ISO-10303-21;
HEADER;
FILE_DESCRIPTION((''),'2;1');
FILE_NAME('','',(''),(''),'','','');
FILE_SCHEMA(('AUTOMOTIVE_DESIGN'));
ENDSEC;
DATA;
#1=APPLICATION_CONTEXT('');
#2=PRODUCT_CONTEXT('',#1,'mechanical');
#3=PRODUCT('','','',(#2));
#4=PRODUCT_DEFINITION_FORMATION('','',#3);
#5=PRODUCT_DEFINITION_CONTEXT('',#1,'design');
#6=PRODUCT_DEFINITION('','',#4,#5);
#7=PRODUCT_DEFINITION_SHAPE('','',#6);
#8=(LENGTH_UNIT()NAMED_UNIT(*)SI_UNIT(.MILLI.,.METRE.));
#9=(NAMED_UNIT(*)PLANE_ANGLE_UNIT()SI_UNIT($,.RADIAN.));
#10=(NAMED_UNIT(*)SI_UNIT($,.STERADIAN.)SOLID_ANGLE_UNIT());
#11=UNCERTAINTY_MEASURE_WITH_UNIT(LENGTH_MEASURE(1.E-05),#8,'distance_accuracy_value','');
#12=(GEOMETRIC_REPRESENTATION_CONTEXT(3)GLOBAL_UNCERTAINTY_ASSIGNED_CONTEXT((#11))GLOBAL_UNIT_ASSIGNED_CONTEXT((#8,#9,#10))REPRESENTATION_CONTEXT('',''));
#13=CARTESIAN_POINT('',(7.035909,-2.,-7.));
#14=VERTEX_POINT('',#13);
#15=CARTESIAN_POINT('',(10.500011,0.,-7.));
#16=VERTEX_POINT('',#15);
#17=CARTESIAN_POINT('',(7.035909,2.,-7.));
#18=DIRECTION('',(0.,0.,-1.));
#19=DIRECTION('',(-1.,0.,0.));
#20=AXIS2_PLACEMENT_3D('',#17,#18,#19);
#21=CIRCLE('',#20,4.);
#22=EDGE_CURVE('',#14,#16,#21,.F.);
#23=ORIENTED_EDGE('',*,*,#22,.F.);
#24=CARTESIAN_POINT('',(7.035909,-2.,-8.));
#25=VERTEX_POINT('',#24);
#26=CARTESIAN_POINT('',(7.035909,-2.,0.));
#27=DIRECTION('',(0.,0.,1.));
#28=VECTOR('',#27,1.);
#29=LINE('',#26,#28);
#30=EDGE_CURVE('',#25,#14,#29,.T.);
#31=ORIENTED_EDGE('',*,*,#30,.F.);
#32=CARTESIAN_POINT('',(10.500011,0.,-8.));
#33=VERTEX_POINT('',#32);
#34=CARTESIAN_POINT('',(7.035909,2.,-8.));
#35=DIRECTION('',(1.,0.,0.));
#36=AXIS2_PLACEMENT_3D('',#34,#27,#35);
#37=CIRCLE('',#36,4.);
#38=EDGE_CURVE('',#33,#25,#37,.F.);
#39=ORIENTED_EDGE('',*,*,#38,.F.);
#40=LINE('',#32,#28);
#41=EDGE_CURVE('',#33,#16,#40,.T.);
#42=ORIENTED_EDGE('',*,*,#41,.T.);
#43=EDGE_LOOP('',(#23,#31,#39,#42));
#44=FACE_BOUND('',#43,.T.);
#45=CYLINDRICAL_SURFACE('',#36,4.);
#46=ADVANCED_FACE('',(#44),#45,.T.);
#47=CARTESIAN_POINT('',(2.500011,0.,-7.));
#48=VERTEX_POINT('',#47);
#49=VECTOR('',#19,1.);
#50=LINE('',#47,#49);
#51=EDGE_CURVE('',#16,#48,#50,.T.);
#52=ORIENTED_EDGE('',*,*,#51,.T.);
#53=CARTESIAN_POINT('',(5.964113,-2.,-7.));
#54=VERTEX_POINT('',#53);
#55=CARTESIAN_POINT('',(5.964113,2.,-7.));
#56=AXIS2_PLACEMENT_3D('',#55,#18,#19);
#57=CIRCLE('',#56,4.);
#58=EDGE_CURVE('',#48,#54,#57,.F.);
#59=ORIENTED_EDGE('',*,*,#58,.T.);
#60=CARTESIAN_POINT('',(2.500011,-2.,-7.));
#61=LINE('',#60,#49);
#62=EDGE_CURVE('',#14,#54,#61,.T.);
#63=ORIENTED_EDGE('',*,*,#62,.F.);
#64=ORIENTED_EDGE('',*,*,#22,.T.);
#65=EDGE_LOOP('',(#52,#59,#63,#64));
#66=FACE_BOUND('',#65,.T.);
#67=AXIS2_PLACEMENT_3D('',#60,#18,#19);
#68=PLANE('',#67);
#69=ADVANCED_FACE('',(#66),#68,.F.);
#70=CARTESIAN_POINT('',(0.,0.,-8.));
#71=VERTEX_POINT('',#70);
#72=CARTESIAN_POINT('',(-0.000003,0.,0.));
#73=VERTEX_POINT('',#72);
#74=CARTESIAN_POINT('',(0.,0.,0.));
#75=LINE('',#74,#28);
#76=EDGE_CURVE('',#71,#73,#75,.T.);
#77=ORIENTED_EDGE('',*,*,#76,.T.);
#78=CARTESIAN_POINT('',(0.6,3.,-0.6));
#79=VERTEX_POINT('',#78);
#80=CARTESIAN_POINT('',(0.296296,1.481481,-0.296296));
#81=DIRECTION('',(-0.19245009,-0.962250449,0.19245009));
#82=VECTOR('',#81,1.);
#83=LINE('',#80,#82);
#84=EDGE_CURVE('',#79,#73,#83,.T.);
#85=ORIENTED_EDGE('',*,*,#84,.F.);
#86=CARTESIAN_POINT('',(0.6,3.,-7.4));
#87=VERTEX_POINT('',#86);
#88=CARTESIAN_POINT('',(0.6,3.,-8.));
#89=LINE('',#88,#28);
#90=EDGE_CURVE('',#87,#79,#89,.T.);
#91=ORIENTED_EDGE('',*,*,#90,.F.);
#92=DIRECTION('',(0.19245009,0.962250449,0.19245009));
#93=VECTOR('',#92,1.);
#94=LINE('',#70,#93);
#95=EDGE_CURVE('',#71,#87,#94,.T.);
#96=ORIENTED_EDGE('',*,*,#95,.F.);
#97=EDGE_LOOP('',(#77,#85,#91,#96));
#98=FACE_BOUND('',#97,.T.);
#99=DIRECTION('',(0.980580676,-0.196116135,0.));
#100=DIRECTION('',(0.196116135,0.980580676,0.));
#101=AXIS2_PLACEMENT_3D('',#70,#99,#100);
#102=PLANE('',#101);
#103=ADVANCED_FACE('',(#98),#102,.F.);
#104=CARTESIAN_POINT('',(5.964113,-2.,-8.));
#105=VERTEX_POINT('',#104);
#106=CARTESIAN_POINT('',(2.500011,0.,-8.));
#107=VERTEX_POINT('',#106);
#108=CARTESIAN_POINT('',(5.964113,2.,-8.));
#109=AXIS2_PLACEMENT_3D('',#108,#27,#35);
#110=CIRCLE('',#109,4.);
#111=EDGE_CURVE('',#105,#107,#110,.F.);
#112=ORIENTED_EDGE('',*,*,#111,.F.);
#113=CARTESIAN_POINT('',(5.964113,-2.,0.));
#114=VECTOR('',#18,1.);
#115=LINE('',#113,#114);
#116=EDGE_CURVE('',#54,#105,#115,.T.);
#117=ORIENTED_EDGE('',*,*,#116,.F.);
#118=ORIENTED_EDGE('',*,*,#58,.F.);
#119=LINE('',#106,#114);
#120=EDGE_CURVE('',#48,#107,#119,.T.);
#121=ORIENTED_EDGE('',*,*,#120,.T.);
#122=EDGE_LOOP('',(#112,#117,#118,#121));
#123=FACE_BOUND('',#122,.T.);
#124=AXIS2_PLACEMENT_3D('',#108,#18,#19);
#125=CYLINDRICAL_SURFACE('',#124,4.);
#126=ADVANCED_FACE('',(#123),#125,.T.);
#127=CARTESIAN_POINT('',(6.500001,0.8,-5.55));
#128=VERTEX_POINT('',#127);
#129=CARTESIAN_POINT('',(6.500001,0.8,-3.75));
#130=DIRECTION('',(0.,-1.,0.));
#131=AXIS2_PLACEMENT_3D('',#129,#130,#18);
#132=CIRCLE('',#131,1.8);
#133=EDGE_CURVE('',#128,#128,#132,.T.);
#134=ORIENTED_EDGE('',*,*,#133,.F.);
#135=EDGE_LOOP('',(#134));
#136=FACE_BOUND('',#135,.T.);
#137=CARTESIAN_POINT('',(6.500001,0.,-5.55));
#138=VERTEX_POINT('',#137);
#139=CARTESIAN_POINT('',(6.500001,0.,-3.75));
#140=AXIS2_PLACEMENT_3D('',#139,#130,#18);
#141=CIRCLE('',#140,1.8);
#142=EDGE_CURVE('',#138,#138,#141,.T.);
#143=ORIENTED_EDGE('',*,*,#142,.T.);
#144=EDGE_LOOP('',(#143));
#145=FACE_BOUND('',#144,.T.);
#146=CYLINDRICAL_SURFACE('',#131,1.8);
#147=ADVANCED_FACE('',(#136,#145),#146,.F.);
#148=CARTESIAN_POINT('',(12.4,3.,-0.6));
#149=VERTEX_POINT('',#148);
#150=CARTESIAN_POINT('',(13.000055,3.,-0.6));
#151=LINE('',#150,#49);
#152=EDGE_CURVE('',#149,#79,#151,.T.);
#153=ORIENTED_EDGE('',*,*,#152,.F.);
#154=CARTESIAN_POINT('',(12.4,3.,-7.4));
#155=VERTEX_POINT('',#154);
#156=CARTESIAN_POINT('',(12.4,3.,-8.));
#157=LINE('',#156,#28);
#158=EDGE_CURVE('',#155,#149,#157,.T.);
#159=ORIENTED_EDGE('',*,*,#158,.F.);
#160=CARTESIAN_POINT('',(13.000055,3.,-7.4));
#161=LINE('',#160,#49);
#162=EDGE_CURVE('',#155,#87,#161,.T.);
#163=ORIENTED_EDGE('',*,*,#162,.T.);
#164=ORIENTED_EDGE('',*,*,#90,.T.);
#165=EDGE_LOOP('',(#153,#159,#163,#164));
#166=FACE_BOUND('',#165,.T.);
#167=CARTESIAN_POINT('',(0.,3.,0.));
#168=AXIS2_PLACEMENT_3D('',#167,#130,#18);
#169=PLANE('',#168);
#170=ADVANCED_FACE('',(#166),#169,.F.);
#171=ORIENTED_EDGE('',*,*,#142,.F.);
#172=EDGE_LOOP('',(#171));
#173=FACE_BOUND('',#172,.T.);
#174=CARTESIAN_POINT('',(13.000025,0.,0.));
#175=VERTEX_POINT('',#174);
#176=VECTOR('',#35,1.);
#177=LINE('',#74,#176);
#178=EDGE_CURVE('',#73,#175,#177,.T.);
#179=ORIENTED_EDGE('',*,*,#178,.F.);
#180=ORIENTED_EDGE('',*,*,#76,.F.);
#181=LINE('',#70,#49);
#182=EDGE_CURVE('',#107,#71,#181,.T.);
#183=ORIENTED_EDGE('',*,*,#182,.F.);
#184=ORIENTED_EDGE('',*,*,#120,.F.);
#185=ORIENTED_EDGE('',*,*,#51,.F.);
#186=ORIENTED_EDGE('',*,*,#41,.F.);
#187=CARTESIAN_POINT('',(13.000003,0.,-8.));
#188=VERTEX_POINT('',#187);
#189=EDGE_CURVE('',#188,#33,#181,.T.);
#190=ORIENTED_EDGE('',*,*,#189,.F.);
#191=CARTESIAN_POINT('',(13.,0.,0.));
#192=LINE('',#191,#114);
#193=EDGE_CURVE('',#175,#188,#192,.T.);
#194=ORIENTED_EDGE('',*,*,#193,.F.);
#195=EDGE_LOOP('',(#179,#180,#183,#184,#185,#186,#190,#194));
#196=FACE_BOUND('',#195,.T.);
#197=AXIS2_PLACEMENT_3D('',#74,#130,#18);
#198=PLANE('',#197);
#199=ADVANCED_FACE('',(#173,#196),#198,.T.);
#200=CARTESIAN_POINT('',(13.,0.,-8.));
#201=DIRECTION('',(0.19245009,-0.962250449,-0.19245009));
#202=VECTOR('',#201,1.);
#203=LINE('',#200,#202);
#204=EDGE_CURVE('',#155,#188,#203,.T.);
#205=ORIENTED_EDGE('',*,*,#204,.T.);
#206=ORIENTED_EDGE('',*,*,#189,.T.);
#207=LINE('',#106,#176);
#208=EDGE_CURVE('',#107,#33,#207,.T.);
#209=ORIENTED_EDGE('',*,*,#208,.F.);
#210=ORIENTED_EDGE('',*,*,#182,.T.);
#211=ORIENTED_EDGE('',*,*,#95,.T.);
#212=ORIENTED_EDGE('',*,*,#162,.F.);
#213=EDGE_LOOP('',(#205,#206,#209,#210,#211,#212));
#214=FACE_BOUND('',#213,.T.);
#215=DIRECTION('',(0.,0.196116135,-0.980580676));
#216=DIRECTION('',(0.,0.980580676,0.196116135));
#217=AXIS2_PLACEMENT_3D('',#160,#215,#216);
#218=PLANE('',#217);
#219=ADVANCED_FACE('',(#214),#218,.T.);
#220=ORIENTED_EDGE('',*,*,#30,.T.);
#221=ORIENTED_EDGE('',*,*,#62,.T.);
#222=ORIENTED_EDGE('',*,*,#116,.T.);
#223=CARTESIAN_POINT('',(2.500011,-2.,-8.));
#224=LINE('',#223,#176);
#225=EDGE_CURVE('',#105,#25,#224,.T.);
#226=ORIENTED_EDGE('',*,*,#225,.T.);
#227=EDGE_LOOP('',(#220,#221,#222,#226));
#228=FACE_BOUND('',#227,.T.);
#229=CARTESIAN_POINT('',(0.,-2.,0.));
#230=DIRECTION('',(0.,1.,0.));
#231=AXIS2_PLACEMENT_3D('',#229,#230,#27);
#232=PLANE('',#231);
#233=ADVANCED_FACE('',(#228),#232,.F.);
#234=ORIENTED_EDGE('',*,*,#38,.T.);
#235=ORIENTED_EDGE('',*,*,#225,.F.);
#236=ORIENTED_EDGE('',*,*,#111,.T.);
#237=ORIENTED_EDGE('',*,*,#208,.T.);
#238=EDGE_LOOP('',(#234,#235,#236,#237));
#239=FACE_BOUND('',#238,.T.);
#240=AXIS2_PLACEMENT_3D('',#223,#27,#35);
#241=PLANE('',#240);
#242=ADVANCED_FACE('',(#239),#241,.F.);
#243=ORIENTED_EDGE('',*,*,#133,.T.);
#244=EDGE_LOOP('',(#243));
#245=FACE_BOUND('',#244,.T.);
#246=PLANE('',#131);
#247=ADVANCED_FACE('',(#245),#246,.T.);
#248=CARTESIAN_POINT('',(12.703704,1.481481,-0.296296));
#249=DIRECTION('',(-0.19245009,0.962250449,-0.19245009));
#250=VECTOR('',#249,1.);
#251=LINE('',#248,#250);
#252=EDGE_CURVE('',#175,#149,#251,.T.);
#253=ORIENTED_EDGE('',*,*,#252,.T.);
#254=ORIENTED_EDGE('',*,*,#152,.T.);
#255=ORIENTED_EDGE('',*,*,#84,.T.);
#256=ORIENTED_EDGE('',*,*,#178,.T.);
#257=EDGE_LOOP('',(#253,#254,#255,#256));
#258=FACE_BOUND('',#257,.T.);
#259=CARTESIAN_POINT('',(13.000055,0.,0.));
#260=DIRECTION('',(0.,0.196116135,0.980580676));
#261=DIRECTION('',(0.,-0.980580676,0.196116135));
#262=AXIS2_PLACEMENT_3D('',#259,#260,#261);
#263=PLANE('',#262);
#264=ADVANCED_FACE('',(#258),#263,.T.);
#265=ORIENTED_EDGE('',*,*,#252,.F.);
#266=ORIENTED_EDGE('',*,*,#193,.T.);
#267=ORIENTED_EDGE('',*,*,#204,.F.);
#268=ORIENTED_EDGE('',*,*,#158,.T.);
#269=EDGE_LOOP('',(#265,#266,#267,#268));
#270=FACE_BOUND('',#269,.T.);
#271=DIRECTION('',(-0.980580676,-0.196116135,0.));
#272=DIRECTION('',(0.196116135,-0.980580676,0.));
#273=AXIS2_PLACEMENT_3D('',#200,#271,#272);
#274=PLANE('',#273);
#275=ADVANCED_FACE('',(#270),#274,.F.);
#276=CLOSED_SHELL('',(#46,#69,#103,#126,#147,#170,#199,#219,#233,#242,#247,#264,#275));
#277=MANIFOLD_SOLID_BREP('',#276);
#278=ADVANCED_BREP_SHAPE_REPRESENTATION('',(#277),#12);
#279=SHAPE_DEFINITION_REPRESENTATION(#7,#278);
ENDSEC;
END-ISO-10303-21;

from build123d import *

# Parameters (mm, degrees)
SKETCH1_W               = 13
SKETCH1_H               = 8
BOSS_EXTRUDE1_DEPTH     = 3
CUT_EXTRUDE1_DEPTH      = 16.556349186
CUT_EXTRUDE1_DEPTH_BACK = 16.556349186
CUT_EXTRUDE2_DEPTH      = 16.556349186
CUT_EXTRUDE2_DEPTH_BACK = 16.556349186
SKETCH4_R               = 1.8
CUT_EXTRUDE3_DEPTH      = 0.8
SKETCH5_W               = 8
SKETCH5_H               = 1
BOSS_EXTRUDE2_DEPTH     = 2
FILLET1_R               = 4


with BuildPart() as part:
    # Sketch1 → Boss-Extrude1 (new body)
    with BuildSketch(Plane(origin=(0, 0, 0), x_dir=(1, 0, 0), z_dir=(0, 1, 0))):
        with Locations((6.5, 4)):
            Rectangle(SKETCH1_W, SKETCH1_H)
    extrude(amount=BOSS_EXTRUDE1_DEPTH)

    # Sketch2 → Cut-Extrude1 (cut, two sides: drawn at the far end of the back side and taken through both)
    with BuildSketch(Plane.XY.offset(-CUT_EXTRUDE1_DEPTH_BACK)):
        Polygon((0, 0), (0.6, 3), (0, 3), align=None)
        Polygon((13, 0), (12.4, 3), (13, 3), align=None)
    extrude(amount=CUT_EXTRUDE1_DEPTH + CUT_EXTRUDE1_DEPTH_BACK, mode=Mode.SUBTRACT)

    # Sketch3 → Cut-Extrude2 (cut, two sides: drawn at the far end of the back side and taken through both)
    with BuildSketch(Plane(origin=(0, 0, 0), x_dir=(0, 0, -1), z_dir=(1, 0, 0)).offset(-CUT_EXTRUDE2_DEPTH_BACK)):
        Polygon((0, 0), (0.6, 3), (0, 3), align=None)
        Polygon((8, 3), (7.4, 3), (8, 0), align=None)
    extrude(amount=CUT_EXTRUDE2_DEPTH + CUT_EXTRUDE2_DEPTH_BACK, mode=Mode.SUBTRACT)

    # Sketch4 → Cut-Extrude3 (cut)
    with BuildSketch(Plane.XZ):
        with Locations(Location((6.50000125, -3.75, 0), (0, 0, 270))):
            Circle(SKETCH4_R)
    extrude(amount=-CUT_EXTRUDE3_DEPTH, mode=Mode.SUBTRACT)

    # Sketch5 → Boss-Extrude2 (add)
    with BuildSketch(Plane.XZ):
        with Locations((6.500011, -7.5)):
            Rectangle(SKETCH5_W, SKETCH5_H)
    extrude(amount=BOSS_EXTRUDE2_DEPTH)

    # Fillet1
    # the kernel refuses this fillet: 4 mm, written as the material it takes off along each edge
    with BuildSketch(Plane(origin=(10.500011, -2, -16.660254038), x_dir=(0, 1, 0), z_dir=(0, 0, 1)), Plane(origin=(2.500011, -2, 1.660254038), x_dir=(0, 1, 0), z_dir=(0, 0, -1))) as fillet1_piece_1:
        with BuildLine():
            CenterArc((4, 3.464101615), FILLET1_R, 180, 60)
            Line((0, 3.464101615), (-0.08, 3.464101615))
            Line((-0.08, 3.464101615), (-0.08, 0))
            Line((-0.08, 0), (0, -0.08))
            ThreePointArc((0, -0.08), (1, -0.08), (1.96, -0.069282032))
            Line((1.96, -0.069282032), (2, 0))
        make_face()
    extrude(amount=18.320508076, mode=Mode.SUBTRACT)


solid = part.part
